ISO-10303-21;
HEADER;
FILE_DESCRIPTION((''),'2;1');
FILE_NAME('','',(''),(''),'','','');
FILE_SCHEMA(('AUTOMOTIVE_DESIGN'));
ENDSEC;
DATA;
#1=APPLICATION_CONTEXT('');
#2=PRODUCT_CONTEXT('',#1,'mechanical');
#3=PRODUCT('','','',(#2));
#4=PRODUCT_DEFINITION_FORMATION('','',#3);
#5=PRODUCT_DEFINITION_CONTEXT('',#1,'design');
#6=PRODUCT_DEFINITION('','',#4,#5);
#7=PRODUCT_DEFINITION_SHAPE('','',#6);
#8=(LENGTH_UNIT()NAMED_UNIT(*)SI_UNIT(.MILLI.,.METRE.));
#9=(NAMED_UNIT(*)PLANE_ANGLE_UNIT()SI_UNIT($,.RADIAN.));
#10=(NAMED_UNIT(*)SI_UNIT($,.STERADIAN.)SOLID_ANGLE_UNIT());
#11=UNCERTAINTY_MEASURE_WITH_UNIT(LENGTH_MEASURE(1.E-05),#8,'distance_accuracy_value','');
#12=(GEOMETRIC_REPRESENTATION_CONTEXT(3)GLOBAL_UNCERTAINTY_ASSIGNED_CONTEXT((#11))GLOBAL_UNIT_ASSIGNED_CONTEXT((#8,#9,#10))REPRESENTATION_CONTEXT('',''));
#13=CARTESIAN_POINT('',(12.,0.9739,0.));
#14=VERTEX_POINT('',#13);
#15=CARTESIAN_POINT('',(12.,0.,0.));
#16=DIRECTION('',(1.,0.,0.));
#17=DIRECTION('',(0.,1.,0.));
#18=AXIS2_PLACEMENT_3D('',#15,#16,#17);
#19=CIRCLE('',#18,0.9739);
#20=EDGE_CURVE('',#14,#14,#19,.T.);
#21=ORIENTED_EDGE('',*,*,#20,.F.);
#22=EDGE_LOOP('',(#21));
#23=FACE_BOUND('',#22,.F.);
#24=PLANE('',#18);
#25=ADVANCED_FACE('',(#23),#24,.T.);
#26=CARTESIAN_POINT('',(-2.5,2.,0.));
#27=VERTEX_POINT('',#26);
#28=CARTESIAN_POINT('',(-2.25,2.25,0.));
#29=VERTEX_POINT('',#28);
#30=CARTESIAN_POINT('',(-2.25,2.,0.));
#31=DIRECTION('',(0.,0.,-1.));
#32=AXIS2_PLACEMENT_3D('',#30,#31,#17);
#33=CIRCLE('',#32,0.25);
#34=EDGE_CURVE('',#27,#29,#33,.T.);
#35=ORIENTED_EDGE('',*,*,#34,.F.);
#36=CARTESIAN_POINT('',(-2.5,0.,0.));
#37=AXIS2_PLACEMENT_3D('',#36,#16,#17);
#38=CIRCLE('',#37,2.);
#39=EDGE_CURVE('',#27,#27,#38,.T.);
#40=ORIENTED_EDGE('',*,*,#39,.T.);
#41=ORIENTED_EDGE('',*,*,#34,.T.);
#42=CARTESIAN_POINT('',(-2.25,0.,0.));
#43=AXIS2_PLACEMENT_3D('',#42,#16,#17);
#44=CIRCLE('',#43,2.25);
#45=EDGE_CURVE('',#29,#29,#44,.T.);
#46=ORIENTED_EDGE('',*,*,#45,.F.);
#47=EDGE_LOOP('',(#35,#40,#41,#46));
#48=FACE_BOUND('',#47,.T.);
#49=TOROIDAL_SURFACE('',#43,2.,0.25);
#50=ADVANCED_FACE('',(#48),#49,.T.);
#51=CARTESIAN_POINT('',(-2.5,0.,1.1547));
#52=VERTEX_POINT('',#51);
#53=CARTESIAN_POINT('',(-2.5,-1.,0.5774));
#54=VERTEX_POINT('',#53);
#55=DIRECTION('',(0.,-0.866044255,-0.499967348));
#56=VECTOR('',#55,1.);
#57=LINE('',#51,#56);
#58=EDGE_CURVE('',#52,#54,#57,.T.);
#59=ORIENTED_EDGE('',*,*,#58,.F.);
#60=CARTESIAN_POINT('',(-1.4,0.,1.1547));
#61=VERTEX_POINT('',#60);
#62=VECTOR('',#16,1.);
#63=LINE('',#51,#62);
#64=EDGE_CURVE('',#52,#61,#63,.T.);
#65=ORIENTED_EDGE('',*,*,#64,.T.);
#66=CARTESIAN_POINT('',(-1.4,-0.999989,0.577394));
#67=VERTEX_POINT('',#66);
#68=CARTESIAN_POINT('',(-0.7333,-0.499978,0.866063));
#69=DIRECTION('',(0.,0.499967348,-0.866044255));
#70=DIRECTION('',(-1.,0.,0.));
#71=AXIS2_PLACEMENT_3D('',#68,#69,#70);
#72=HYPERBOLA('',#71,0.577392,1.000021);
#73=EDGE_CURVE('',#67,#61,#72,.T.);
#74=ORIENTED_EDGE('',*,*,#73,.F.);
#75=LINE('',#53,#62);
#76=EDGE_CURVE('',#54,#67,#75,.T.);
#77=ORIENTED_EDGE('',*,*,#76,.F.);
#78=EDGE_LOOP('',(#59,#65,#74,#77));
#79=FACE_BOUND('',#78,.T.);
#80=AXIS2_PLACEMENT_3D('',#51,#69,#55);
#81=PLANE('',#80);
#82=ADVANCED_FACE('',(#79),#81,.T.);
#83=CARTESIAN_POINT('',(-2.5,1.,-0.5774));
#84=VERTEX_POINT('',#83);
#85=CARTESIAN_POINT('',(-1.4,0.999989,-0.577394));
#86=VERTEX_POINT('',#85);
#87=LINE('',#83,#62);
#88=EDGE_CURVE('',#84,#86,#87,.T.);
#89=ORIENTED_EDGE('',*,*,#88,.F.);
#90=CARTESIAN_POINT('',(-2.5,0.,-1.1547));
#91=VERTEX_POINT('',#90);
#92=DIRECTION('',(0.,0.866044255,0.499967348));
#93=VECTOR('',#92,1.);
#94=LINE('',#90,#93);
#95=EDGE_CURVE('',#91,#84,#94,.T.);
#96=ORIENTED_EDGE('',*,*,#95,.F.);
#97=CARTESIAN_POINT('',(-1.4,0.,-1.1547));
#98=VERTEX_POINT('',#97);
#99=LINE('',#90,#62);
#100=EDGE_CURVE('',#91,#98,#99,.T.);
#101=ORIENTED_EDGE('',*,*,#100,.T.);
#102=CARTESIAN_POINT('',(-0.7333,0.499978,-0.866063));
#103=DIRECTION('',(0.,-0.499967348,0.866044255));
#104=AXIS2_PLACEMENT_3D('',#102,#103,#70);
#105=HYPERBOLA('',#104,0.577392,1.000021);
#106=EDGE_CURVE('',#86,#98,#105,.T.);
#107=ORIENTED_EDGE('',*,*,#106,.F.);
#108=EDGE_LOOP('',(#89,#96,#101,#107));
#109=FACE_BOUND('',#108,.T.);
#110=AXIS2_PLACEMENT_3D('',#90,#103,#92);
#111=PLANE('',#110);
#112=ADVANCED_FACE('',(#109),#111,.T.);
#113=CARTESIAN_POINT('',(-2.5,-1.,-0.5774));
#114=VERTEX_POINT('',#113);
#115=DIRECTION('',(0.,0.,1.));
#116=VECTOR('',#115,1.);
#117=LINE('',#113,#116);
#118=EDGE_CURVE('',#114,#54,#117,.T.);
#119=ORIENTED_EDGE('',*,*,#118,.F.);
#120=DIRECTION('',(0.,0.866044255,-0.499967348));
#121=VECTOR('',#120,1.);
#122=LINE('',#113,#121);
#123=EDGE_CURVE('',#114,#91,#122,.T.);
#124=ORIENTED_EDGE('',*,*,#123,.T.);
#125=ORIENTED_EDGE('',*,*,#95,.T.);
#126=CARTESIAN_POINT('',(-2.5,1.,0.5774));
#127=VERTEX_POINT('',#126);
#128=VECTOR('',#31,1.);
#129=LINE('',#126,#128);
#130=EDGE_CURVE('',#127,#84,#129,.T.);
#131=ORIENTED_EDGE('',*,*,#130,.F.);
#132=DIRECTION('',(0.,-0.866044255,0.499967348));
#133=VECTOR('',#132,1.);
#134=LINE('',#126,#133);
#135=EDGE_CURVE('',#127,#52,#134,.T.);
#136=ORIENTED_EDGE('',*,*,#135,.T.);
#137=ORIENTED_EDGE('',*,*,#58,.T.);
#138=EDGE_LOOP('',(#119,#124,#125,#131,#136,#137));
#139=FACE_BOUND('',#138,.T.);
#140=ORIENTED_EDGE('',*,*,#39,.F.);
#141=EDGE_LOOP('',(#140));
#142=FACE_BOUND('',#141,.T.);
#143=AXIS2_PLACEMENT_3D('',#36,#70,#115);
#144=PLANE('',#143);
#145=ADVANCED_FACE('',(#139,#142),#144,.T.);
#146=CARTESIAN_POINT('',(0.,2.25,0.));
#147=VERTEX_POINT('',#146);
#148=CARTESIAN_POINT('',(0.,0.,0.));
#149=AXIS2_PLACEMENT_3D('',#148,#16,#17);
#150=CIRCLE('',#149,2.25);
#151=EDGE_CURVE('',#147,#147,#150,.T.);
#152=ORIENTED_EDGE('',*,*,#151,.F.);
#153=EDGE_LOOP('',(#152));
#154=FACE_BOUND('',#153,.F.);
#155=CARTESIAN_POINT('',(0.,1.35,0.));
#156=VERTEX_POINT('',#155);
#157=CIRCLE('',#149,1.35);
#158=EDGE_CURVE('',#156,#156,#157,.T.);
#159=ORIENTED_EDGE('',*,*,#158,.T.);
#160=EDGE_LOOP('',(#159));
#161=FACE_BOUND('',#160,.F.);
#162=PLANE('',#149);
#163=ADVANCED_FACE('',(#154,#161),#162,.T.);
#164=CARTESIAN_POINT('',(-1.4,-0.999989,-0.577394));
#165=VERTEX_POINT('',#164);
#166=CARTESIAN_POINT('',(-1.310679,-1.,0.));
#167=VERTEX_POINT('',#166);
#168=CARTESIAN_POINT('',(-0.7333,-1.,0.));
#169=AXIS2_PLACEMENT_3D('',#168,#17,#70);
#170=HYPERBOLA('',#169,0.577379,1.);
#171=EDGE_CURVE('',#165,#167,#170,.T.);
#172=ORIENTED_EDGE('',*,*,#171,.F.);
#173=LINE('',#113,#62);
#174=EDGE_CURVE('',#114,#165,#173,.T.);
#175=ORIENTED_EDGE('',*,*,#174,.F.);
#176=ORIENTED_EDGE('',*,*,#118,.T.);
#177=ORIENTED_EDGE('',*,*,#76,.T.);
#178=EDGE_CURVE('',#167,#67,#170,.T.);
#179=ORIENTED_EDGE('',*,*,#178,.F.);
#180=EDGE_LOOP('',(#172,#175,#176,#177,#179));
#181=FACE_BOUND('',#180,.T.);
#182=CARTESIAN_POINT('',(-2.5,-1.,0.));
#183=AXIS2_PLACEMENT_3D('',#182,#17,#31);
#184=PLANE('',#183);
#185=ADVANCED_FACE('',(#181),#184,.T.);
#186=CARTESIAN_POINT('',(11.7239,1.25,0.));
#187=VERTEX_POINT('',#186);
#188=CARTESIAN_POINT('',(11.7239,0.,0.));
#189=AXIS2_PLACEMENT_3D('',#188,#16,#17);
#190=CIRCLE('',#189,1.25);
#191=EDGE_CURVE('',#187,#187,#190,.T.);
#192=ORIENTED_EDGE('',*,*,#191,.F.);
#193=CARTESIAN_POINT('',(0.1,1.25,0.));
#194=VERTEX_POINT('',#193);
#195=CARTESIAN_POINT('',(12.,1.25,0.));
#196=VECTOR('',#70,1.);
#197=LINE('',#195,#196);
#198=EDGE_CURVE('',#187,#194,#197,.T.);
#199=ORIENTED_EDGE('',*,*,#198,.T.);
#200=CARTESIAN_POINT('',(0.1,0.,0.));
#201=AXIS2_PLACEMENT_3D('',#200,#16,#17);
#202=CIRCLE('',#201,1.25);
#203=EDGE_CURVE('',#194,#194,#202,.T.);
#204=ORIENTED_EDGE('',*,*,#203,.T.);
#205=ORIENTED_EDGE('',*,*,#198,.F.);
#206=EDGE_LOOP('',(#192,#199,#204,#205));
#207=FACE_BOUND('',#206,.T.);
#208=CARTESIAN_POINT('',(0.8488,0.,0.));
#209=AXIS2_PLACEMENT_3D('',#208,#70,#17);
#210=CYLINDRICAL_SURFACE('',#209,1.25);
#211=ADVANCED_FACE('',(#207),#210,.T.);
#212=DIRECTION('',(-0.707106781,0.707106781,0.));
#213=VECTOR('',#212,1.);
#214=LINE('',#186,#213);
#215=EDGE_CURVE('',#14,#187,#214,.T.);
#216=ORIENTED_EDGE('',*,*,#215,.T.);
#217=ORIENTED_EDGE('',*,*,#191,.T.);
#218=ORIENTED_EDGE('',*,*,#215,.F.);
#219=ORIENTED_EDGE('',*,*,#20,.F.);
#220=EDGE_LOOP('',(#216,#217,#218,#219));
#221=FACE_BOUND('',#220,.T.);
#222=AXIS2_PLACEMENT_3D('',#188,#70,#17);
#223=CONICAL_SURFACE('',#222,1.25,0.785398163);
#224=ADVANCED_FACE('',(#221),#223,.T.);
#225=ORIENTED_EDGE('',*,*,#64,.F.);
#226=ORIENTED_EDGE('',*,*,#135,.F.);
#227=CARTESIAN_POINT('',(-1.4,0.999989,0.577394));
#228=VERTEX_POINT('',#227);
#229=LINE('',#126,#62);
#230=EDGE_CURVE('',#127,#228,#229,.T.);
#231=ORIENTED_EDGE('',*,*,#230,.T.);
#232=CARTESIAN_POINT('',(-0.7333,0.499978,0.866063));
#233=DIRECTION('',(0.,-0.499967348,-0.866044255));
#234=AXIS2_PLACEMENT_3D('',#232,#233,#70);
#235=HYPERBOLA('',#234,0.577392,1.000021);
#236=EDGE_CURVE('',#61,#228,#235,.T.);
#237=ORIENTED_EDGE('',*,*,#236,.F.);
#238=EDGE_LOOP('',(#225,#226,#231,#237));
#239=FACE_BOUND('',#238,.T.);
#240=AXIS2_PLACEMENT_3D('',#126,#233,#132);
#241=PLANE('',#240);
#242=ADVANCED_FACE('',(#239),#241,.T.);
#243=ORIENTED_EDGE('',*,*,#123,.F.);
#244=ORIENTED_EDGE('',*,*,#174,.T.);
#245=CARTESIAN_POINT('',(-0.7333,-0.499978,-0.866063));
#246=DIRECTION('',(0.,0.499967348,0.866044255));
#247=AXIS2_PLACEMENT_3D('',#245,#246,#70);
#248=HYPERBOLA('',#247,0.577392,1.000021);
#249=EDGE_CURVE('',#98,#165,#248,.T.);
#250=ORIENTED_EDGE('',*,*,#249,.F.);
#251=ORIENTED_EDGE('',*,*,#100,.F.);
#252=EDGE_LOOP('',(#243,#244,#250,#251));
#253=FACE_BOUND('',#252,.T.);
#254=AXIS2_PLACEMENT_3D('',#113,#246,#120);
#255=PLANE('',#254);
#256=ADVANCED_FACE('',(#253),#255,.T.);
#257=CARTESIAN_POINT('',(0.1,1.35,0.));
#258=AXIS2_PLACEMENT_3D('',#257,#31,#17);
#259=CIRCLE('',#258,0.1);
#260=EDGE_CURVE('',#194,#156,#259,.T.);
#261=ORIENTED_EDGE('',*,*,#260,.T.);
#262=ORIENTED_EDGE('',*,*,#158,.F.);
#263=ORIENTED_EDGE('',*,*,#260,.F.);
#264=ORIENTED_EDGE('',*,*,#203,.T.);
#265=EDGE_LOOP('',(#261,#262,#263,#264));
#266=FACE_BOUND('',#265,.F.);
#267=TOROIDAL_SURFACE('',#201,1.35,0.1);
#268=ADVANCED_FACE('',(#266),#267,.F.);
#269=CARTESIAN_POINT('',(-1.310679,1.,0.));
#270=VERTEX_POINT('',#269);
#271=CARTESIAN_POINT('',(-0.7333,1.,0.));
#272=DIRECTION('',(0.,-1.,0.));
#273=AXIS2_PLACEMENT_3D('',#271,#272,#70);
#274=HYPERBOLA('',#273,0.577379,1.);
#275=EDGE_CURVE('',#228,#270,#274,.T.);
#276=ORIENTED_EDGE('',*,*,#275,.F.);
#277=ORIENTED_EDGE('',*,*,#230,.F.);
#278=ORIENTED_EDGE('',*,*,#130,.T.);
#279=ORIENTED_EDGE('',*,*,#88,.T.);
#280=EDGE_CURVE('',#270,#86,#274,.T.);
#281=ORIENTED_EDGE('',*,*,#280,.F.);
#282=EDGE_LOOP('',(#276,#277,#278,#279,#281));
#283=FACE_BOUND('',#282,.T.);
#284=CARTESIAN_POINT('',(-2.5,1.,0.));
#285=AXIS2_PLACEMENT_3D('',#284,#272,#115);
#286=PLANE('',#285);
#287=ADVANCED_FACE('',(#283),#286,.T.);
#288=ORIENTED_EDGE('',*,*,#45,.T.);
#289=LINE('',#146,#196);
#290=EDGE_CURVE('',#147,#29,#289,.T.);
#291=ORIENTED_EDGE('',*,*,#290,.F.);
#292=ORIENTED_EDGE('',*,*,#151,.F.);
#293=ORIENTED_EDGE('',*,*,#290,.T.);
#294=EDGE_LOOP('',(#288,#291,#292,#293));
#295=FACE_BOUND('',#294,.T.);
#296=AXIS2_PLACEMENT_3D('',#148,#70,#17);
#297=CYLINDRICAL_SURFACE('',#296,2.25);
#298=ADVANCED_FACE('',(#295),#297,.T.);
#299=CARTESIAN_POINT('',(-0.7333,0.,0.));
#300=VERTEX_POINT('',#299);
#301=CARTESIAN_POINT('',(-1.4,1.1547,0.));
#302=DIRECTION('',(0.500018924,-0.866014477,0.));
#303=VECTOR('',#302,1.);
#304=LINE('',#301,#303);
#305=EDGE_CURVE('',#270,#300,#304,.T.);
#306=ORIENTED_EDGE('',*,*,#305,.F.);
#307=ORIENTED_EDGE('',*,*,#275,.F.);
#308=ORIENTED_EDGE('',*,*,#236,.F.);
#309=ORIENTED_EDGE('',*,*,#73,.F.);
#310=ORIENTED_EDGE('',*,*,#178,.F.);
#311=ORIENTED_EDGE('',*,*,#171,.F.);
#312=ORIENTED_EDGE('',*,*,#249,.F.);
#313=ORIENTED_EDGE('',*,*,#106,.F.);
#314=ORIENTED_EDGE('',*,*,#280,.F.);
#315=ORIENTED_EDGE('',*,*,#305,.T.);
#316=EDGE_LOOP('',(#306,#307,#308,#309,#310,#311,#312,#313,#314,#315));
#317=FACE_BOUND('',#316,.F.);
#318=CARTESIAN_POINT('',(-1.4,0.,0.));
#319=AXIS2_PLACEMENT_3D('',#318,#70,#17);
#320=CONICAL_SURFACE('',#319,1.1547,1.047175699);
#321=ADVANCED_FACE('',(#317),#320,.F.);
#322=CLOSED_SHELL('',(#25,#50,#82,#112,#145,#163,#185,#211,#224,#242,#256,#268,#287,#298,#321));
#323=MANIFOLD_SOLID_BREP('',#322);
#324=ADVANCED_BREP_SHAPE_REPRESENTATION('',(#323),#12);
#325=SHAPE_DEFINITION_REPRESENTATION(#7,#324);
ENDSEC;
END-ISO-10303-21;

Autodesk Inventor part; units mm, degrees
ref_plane "YZ Plane" through (0, 0, 0) normal (1, 0, 0) x (0, 1, 0)
ref_plane "XZ Plane" through (0, 0, 0) normal (0, 1, 0) x (-1, 0, 0)
sketch "Skizze1" plane through (0, 0, 0) normal (0, 0, 1) x (1, 0, 0)
  line L0 (-0.7333, 0) -> (12, 0)
  line L1 (12, 0) -> (12, 1.25)
  line L2 (12, 1.25) -> (1.125, 1.25)
  line L3 (1.125, 1.25) -> (0.8488, 1.25)
  line L4 (0.8488, 1.25) -> (0, 1.25)
  line L5 (0, 1.25) -> (0, 2.25)
  line L6 (0, 2.25) -> (-2.5, 2.25)
  line L7 (-2.5, 2.25) -> (-2.5, 1.1547)
  line L8 (-2.5, 1.1547) -> (-1.4, 1.1547)
  line L9 (-1.4, 1.1547) -> (-0.7333, 0)
  line L10 (-5.4, 0) -> (14.9, 0) projected
  line L11 (0, -0.45) -> (0, 2.7) projected
  line L12 (1.125, 1.25) -> (0, 1.25) construction
  dimension "d1" = 10.875
  dimension "d2" = 0.2762
  dimension "d3" = 2.5
  dimension "d4" = 1.1
  dimension "d5" = 60
  dimension "d6" = 2.5
  dimension "d7" = 2.5
  dimension "d8" = 2.3094
  dimension "d9" = 4.5
  dimension "d26" = 12
revolve "Körper" add sketch "Skizze1" angle 360 about axis through (-0.7333, 0, 0) along (1, 0, 0)
sketch "Skizze2" plane through (-2.5, 0, 0) normal (-1, 0, 0) x (0, 0, 1)
  circle A0 centre (0, 0) radius 1.1547 projected
  line L0 (0, -3.15) -> (0, 3.15) projected
  line L1 (-3.15, 0) -> (3.15, 0) projected
  line L2 (1.1547, 0) -> (0.5774, -1)
  line L3 (0.5774, -1) -> (-0.5774, -1)
  line L4 (-0.5774, -1) -> (-1.1547, 0)
  line L5 (-1.1547, 0) -> (-0.5774, 1)
  line L6 (-0.5774, 1) -> (0.5774, 1)
  line L7 (0.5774, 1) -> (1.1547, 0)
extrude "Loch" add sketch "Skizze2" against normal up to next contours L7 A0 | A0 L2 | L6 L0 A0 | A0 L0 L3 | L0 L6 A0 | A0 L3 L0 | L4 A0 | A0 L5
fillet "Rundung1" radius 0.25 1 edges at (-2.5, -2.25, 0)
thread "Gewinde" size "M2.5x0.45" class "6g" standard "ISO Metric profile" length 10.875
chamfer "Fase1" distance 0.2761 distance2 0.2761 1 edges at (12, -1.25, 0) measured on face at (12, -0.2714, -0.6096)
ref_plane "Work Plane1" through (29, 0, 0) normal (0, -1, 0) x (1, 0, 0)
fillet "Fillet2" radius 0.1 1 edges at (0, -1.25, 0)
equation "\"d1\" = GEL"
equation "\"d3\" = KOH"
equation "\"d4\" = INTI"
equation "\"d6\" = GD"
equation "\"d7\" = BDM"
equation "\"d8\" = 1.1547 * SW"
equation "\"d9\" = KOD"
equation "\"d26\" = NLG"
equation "\"d30\" = R"
equation "\"d17\" = RR"
equation "\"d13\" = GEL"
equation "\"d15\" = -0.5 * SPD + 0.5 * GD"
equation "\"d16\" = GUL"
equation "\"GD\" = NND"
equation "\"NLG\" = 12"
equation "\"GEL\" = 10.875"
equation "\"KOD\" = 4.5"
equation "\"KOH\" = 2.5"
equation "\"INTI\" = 1.1"
equation "\"GAL\" = 0.61345 * PTC"
equation "\"GUL\" = 0.61345 * PTC"
equation "\"BDM\" = NND"
equation "\"SW\" = 2"
equation "\"RR\" = 0.25"
equation "\"SPD\" = NND - 1.2269 * PTC"
equation "\"R\" = 0.1"
equation "\"TOA\" = 30deg"
equation "\"GD1\" = THREADDIA - 1.2269 * PTC"
equation "\"THREADDIA\" = 2.5"
equation "\"FAWI\" = 45deg"
equation "\"ANG\" = 120deg"
equation "\"PTC\" = 0.45"
equation "\"NND\" = 2.5"
equation "\"E0\" = 1.155 * SW"
properties part number "DIN 912 - M2,5 x 12" material "Stahl, weich"
